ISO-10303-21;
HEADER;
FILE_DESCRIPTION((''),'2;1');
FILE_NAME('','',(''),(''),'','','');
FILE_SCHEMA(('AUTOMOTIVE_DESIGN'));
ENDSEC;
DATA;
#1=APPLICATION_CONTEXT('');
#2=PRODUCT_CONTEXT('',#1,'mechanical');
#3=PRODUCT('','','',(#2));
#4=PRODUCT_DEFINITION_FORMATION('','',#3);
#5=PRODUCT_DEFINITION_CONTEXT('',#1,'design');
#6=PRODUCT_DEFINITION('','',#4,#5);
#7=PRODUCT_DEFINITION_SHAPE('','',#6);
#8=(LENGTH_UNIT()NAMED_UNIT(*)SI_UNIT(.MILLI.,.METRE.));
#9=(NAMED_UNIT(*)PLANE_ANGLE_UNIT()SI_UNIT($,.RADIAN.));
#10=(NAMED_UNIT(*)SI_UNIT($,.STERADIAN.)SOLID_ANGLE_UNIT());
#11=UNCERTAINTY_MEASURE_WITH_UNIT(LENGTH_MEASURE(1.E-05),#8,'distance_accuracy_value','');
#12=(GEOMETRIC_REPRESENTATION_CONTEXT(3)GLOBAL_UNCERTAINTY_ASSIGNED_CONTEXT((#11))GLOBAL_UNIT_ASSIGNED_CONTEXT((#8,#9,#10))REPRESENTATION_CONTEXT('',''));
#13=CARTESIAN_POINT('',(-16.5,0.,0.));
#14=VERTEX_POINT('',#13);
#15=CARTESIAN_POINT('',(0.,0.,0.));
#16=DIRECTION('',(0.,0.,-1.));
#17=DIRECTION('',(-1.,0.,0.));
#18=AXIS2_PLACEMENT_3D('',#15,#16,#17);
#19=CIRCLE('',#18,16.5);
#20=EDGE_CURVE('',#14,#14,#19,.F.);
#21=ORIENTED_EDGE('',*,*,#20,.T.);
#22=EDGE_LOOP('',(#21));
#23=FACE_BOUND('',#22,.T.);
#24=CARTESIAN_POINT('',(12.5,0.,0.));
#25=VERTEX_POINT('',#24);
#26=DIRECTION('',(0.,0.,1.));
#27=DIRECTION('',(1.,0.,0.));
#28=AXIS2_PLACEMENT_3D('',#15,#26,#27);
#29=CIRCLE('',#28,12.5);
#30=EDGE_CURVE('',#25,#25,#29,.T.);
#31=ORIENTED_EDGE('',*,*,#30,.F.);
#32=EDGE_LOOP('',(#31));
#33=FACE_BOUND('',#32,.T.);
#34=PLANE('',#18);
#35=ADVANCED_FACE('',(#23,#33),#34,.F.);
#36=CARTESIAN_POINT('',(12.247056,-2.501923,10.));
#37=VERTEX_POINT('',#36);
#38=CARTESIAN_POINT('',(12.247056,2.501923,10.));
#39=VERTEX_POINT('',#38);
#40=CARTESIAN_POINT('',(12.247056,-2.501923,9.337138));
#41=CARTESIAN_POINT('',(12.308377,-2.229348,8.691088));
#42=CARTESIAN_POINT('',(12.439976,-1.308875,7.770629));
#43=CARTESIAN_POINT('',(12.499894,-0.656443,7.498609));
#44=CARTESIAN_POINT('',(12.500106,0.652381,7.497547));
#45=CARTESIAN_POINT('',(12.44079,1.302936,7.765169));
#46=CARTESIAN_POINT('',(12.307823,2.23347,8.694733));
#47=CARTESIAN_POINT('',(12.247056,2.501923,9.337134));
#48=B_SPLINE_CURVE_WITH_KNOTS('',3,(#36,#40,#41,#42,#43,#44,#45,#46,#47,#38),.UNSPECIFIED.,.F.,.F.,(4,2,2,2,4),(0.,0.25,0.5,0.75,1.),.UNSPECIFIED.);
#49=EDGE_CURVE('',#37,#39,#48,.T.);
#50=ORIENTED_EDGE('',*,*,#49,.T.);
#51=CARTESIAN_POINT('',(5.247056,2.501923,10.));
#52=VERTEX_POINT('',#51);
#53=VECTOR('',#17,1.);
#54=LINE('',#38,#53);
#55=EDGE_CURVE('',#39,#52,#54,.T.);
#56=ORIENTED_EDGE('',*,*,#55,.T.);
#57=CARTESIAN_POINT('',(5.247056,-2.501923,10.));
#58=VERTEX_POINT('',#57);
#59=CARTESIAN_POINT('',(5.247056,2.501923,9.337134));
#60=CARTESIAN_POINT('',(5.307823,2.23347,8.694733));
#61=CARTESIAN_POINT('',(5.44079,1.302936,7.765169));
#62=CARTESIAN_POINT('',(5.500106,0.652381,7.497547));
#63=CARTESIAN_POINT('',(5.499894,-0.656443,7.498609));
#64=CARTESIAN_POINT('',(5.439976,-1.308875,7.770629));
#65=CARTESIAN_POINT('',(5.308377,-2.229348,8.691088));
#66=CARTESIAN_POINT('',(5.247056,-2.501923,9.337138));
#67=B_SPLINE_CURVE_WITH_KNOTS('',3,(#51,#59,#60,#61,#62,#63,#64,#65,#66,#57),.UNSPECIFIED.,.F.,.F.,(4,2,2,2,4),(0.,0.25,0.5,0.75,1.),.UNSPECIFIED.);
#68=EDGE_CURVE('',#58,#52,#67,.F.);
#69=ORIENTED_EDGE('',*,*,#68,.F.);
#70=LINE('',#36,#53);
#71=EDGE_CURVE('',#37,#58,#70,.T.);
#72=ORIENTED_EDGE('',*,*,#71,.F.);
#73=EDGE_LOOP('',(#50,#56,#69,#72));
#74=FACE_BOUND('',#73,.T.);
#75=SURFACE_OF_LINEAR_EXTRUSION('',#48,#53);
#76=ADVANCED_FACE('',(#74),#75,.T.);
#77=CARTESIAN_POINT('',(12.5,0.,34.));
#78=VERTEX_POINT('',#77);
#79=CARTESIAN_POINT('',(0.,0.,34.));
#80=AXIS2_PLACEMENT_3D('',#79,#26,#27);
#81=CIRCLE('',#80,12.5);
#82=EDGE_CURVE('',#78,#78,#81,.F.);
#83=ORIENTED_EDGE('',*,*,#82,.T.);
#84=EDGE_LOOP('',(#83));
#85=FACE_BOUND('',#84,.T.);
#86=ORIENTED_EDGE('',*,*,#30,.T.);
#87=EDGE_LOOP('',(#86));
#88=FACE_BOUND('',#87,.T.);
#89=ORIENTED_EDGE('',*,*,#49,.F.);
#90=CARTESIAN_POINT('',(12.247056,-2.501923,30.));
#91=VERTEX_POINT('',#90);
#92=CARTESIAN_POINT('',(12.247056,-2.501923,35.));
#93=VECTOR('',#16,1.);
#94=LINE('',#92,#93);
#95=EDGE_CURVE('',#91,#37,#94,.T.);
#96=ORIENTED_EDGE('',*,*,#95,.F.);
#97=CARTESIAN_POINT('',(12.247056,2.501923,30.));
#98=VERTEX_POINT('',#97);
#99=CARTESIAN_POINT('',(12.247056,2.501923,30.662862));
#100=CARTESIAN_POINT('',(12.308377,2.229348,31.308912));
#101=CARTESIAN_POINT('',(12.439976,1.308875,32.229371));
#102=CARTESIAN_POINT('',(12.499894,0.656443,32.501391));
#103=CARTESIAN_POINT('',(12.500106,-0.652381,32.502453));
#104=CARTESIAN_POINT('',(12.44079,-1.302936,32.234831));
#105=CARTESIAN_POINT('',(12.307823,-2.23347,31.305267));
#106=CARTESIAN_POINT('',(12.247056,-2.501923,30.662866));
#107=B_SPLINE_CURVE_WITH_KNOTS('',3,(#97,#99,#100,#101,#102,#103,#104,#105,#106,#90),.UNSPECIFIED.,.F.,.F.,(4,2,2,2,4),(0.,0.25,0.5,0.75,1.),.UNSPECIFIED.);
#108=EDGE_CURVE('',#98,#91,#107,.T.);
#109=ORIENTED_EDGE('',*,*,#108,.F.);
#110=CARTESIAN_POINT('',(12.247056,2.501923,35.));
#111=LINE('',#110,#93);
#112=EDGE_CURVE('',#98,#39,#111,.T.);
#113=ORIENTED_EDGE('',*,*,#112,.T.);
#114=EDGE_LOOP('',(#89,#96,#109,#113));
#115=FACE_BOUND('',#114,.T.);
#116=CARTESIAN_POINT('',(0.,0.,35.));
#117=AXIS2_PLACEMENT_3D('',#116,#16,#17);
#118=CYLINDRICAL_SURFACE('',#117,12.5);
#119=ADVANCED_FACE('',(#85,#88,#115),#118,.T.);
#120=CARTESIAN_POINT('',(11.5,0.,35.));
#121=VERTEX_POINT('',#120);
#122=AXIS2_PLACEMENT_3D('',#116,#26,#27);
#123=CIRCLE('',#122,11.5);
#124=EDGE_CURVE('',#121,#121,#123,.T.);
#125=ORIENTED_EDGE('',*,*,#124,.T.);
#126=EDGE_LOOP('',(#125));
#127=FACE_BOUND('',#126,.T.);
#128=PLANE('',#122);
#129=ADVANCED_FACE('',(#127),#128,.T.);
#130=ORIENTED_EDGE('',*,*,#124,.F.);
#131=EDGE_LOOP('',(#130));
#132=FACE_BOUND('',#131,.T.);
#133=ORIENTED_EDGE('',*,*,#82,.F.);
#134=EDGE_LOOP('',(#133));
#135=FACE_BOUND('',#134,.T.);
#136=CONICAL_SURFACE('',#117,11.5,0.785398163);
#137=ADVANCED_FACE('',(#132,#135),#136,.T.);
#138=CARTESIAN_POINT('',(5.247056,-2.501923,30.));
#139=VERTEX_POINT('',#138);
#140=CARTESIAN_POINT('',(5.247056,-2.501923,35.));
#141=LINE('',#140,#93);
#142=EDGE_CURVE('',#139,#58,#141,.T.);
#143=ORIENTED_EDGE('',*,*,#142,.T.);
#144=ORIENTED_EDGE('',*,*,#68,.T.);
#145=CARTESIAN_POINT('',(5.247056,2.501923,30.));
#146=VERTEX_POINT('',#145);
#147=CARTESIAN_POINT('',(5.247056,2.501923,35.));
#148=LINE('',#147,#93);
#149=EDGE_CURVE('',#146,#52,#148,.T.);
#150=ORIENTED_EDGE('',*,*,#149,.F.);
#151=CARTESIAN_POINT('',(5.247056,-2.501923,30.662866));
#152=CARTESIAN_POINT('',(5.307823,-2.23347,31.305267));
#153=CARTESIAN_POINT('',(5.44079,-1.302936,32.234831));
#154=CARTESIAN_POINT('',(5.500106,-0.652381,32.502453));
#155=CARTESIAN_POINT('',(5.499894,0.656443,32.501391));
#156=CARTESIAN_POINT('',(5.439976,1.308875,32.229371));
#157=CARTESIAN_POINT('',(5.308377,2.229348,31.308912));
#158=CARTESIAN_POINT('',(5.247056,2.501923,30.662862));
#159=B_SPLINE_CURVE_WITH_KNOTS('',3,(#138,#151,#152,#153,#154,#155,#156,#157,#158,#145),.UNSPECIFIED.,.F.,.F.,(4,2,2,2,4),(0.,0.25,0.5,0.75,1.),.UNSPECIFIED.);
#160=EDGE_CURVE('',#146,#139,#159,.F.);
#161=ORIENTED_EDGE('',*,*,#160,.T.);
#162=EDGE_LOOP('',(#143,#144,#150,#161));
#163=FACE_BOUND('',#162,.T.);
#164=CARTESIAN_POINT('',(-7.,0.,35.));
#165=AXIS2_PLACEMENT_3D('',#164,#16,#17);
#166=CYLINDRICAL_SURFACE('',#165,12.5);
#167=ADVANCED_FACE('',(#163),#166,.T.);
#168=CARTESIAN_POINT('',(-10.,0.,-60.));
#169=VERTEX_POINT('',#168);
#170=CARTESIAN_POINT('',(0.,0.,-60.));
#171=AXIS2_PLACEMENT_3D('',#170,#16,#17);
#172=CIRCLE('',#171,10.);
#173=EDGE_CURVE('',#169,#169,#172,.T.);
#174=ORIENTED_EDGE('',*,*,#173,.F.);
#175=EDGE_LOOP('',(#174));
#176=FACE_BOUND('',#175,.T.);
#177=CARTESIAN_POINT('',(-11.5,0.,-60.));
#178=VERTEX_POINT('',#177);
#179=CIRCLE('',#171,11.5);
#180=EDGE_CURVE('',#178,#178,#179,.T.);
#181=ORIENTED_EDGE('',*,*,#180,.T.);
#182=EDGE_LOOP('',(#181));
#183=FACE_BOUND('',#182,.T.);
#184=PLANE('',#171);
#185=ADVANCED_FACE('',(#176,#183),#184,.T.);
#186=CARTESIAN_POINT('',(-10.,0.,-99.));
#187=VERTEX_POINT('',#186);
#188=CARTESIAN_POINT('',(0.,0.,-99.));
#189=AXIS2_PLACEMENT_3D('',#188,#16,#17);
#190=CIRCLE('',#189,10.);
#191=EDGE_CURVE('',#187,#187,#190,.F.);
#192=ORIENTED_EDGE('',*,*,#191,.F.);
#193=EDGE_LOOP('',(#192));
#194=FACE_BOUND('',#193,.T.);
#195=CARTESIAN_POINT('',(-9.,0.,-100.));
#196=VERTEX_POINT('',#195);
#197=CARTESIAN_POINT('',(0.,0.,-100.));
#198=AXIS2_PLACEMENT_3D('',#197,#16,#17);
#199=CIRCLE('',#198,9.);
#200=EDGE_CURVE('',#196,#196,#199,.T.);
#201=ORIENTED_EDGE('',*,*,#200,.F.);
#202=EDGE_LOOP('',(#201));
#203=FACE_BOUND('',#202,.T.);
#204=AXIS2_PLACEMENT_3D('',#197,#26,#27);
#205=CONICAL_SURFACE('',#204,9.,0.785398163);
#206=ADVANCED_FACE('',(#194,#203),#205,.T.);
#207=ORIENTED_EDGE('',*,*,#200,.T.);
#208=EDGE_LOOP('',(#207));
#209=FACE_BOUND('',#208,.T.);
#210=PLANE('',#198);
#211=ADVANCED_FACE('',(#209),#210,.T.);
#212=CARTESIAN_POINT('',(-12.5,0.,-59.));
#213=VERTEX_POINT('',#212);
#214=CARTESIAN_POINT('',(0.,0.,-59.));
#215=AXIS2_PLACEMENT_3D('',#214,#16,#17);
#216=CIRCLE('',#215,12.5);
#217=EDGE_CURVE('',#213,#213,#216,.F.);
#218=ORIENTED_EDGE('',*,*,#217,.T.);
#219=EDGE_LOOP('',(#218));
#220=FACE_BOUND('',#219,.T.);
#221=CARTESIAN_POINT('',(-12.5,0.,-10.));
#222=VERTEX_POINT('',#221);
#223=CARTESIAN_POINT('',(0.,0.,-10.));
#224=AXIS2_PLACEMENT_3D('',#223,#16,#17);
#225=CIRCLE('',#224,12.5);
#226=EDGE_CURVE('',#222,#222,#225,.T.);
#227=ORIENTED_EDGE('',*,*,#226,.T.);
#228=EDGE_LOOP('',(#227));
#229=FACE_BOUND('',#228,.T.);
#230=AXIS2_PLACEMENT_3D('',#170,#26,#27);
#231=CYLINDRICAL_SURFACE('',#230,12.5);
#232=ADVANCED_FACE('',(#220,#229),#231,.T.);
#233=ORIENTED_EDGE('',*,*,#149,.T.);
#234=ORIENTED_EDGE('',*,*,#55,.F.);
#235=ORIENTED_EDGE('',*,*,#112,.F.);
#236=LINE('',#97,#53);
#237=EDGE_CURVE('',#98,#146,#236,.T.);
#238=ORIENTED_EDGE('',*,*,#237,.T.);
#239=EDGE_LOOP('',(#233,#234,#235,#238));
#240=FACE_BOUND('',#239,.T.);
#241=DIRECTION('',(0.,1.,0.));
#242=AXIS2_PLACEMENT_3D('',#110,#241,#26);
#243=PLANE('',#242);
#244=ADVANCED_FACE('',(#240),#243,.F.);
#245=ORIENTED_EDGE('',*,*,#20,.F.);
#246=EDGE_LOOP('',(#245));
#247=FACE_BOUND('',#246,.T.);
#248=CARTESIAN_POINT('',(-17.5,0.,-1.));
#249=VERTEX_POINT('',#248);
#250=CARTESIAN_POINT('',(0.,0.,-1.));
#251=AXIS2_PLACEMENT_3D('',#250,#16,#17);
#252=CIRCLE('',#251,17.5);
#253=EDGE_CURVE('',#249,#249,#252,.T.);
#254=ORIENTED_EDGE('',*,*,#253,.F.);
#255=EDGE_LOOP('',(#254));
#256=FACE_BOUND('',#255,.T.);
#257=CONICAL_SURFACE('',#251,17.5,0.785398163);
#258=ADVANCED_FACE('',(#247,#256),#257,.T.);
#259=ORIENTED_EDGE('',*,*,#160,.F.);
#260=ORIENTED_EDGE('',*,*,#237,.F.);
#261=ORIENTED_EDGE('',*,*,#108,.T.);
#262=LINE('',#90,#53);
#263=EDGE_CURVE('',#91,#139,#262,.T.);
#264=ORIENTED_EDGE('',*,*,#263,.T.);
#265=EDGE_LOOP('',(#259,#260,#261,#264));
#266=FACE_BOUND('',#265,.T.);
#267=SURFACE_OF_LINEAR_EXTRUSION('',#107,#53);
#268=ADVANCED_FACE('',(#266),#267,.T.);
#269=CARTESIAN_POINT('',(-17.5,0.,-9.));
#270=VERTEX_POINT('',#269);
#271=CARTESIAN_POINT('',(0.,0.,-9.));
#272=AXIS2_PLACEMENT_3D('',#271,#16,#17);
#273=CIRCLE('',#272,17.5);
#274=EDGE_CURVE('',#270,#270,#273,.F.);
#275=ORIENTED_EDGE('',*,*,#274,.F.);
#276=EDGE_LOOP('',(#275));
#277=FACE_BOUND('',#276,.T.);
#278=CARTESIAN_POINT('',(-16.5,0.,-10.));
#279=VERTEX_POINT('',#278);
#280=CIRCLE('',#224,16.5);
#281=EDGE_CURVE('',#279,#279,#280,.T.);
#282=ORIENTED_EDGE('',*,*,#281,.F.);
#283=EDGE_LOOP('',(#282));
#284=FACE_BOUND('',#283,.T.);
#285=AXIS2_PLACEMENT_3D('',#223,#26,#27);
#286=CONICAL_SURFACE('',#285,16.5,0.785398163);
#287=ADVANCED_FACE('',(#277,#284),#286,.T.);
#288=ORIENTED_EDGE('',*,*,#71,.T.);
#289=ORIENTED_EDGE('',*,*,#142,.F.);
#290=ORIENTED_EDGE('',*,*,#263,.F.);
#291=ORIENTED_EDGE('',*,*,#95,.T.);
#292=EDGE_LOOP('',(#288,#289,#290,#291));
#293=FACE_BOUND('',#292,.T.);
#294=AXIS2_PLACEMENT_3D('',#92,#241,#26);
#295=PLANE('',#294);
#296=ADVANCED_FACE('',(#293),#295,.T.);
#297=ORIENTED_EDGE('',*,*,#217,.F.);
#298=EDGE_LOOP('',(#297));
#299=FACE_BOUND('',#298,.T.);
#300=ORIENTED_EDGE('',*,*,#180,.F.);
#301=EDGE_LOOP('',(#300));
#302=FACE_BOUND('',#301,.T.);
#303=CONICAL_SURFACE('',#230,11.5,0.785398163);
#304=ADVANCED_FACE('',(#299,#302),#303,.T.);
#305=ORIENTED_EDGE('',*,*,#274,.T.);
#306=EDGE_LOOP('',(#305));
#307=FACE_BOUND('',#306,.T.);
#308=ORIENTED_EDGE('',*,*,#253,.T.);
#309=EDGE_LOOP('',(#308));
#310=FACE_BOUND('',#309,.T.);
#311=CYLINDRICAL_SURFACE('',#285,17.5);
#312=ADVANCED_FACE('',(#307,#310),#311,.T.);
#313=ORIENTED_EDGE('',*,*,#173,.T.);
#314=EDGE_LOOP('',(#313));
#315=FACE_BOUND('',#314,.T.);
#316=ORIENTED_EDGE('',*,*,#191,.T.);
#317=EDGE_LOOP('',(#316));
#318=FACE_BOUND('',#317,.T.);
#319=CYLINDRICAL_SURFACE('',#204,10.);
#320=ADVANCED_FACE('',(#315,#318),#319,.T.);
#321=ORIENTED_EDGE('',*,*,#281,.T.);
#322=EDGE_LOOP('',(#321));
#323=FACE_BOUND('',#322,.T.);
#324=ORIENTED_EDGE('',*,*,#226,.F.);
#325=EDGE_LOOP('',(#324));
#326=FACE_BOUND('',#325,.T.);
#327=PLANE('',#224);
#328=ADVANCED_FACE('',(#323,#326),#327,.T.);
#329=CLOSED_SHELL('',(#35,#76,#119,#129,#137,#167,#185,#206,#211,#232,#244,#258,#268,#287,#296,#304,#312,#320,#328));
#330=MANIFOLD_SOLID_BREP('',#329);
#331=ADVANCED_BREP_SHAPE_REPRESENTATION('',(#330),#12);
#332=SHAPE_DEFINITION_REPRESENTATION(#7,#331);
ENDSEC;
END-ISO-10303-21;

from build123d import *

# Parameters (mm, degrees)
SKETCH1_R             = 12.5
BOSS_EXTRUDE2_DEPTH   = 35
SKETCH6_R             = 17.5
BOSS_EXTRUDE3_DEPTH   = 10
BOSS_EXTRUDE4_START   = 50
SKETCH7_R             = 12.5
BOSS_EXTRUDE4_DEPTH   = 50
SKETCH8_R             = 10
BOSS_EXTRUDE5_DEPTH   = 40
CHAMFER1_SIZE         = 1
CUT_EXTRUDE11_START   = 5.24705599
CUT_EXTRUDE11_DEPTH   = 8.75294401
CUT_EXTRUDE11_START_2 = 6
CUT_EXTRUDE11_2_DEPTH = 28


with BuildPart() as part:
    # Sketch1 → Boss-Extrude2 (new body)
    with BuildSketch(Plane.XY):
        Circle(SKETCH1_R)
    extrude(amount=BOSS_EXTRUDE2_DEPTH)

    # Sketch6 → Boss-Extrude3 (add)
    with BuildSketch(Plane(origin=(0, 0, 0), x_dir=(-1, 0, 0), z_dir=(0, 0, -1))):
        Circle(SKETCH6_R)
    extrude(amount=BOSS_EXTRUDE3_DEPTH)

    # Sketch7 → Boss-Extrude4 (add)
    with BuildSketch(Plane(origin=(0, 0, -10), x_dir=(-1, 0, 0), z_dir=(0, 0, -1)).offset(BOSS_EXTRUDE4_START)):
        with Locations(Location((0, 0, 0), (0, 0, 180))):
            Circle(SKETCH7_R)
    extrude(amount=-BOSS_EXTRUDE4_DEPTH)

    # Sketch8 → Boss-Extrude5 (add)
    with BuildSketch(Plane(origin=(0, 0, -60), x_dir=(-1, 0, 0), z_dir=(0, 0, -1))):
        Circle(SKETCH8_R)
    extrude(amount=BOSS_EXTRUDE5_DEPTH)

    # Chamfer1
    chamfer1_edges = [part.edges().sort_by_distance(p)[0] for p in [
        (-12.5, 0, -60),
        (10, 0, -100),
        (-12.5, 0, 35),
        (17.5, 0, 0),
        (17.5, 0, -10),
    ]]
    chamfer(chamfer1_edges, length=CHAMFER1_SIZE)

    # Cut-Extrude11: read off the stored shape, not the designer's step
    # Cut-Extrude11 outline → Cut-Extrude11 (cut)
    with BuildSketch(Plane(origin=(0, 0, 0), x_dir=(0, 0, -1), z_dir=(1, 0, 0)).offset(CUT_EXTRUDE11_START)):
        with BuildLine():
            Line((-10, 2.501922686), (-30, 2.501922686))
            add(Edge.make_bspline(
                [(-30, 2.501922686), (-30.662861656, 2.501922686), (-31.308912406, 2.229348378), (-32.229370531, 1.308874674), (-32.501390649, 0.6564432), (-32.502453075, -0.652381374), (-32.23483126, -1.302936015), (-31.305267278, -2.233470473), (-30.662865998, -2.501922686), (-30, -2.501922686)],
                knots=[0, 0, 0, 0, 0.25, 0.25, 0.5, 0.5, 0.75, 0.75, 1, 1, 1, 1], degree=3))
            Line((-30, -2.501922686), (-10, -2.501922686))
            add(Edge.make_bspline(
                [(-10, -2.501922686), (-9.337138344, -2.501922686), (-8.691087594, -2.229348378), (-7.770629469, -1.308874674), (-7.498609351, -0.6564432), (-7.497546925, 0.652381374), (-7.76516874, 1.302936015), (-8.694732722, 2.233470473), (-9.337134002, 2.501922686), (-10, 2.501922686)],
                knots=[0, 0, 0, 0, 0.25, 0.25, 0.5, 0.5, 0.75, 0.75, 1, 1, 1, 1], degree=3))
        make_face()
    extrude(amount=CUT_EXTRUDE11_DEPTH, mode=Mode.SUBTRACT)

    # Cut-Extrude11 2 outline → Cut-Extrude11 2 (add)
    with BuildSketch(Plane.XY.offset(CUT_EXTRUDE11_START_2)):
        with BuildLine():
            ThreePointArc((5.24705609, -2.501922686), (5.5, 0), (5.24705609, 2.501922686))
            Line((5.24705609, 2.501922686), (5.24705609, -2.501922686))
        make_face()
    extrude(amount=CUT_EXTRUDE11_2_DEPTH)


solid = part.part
